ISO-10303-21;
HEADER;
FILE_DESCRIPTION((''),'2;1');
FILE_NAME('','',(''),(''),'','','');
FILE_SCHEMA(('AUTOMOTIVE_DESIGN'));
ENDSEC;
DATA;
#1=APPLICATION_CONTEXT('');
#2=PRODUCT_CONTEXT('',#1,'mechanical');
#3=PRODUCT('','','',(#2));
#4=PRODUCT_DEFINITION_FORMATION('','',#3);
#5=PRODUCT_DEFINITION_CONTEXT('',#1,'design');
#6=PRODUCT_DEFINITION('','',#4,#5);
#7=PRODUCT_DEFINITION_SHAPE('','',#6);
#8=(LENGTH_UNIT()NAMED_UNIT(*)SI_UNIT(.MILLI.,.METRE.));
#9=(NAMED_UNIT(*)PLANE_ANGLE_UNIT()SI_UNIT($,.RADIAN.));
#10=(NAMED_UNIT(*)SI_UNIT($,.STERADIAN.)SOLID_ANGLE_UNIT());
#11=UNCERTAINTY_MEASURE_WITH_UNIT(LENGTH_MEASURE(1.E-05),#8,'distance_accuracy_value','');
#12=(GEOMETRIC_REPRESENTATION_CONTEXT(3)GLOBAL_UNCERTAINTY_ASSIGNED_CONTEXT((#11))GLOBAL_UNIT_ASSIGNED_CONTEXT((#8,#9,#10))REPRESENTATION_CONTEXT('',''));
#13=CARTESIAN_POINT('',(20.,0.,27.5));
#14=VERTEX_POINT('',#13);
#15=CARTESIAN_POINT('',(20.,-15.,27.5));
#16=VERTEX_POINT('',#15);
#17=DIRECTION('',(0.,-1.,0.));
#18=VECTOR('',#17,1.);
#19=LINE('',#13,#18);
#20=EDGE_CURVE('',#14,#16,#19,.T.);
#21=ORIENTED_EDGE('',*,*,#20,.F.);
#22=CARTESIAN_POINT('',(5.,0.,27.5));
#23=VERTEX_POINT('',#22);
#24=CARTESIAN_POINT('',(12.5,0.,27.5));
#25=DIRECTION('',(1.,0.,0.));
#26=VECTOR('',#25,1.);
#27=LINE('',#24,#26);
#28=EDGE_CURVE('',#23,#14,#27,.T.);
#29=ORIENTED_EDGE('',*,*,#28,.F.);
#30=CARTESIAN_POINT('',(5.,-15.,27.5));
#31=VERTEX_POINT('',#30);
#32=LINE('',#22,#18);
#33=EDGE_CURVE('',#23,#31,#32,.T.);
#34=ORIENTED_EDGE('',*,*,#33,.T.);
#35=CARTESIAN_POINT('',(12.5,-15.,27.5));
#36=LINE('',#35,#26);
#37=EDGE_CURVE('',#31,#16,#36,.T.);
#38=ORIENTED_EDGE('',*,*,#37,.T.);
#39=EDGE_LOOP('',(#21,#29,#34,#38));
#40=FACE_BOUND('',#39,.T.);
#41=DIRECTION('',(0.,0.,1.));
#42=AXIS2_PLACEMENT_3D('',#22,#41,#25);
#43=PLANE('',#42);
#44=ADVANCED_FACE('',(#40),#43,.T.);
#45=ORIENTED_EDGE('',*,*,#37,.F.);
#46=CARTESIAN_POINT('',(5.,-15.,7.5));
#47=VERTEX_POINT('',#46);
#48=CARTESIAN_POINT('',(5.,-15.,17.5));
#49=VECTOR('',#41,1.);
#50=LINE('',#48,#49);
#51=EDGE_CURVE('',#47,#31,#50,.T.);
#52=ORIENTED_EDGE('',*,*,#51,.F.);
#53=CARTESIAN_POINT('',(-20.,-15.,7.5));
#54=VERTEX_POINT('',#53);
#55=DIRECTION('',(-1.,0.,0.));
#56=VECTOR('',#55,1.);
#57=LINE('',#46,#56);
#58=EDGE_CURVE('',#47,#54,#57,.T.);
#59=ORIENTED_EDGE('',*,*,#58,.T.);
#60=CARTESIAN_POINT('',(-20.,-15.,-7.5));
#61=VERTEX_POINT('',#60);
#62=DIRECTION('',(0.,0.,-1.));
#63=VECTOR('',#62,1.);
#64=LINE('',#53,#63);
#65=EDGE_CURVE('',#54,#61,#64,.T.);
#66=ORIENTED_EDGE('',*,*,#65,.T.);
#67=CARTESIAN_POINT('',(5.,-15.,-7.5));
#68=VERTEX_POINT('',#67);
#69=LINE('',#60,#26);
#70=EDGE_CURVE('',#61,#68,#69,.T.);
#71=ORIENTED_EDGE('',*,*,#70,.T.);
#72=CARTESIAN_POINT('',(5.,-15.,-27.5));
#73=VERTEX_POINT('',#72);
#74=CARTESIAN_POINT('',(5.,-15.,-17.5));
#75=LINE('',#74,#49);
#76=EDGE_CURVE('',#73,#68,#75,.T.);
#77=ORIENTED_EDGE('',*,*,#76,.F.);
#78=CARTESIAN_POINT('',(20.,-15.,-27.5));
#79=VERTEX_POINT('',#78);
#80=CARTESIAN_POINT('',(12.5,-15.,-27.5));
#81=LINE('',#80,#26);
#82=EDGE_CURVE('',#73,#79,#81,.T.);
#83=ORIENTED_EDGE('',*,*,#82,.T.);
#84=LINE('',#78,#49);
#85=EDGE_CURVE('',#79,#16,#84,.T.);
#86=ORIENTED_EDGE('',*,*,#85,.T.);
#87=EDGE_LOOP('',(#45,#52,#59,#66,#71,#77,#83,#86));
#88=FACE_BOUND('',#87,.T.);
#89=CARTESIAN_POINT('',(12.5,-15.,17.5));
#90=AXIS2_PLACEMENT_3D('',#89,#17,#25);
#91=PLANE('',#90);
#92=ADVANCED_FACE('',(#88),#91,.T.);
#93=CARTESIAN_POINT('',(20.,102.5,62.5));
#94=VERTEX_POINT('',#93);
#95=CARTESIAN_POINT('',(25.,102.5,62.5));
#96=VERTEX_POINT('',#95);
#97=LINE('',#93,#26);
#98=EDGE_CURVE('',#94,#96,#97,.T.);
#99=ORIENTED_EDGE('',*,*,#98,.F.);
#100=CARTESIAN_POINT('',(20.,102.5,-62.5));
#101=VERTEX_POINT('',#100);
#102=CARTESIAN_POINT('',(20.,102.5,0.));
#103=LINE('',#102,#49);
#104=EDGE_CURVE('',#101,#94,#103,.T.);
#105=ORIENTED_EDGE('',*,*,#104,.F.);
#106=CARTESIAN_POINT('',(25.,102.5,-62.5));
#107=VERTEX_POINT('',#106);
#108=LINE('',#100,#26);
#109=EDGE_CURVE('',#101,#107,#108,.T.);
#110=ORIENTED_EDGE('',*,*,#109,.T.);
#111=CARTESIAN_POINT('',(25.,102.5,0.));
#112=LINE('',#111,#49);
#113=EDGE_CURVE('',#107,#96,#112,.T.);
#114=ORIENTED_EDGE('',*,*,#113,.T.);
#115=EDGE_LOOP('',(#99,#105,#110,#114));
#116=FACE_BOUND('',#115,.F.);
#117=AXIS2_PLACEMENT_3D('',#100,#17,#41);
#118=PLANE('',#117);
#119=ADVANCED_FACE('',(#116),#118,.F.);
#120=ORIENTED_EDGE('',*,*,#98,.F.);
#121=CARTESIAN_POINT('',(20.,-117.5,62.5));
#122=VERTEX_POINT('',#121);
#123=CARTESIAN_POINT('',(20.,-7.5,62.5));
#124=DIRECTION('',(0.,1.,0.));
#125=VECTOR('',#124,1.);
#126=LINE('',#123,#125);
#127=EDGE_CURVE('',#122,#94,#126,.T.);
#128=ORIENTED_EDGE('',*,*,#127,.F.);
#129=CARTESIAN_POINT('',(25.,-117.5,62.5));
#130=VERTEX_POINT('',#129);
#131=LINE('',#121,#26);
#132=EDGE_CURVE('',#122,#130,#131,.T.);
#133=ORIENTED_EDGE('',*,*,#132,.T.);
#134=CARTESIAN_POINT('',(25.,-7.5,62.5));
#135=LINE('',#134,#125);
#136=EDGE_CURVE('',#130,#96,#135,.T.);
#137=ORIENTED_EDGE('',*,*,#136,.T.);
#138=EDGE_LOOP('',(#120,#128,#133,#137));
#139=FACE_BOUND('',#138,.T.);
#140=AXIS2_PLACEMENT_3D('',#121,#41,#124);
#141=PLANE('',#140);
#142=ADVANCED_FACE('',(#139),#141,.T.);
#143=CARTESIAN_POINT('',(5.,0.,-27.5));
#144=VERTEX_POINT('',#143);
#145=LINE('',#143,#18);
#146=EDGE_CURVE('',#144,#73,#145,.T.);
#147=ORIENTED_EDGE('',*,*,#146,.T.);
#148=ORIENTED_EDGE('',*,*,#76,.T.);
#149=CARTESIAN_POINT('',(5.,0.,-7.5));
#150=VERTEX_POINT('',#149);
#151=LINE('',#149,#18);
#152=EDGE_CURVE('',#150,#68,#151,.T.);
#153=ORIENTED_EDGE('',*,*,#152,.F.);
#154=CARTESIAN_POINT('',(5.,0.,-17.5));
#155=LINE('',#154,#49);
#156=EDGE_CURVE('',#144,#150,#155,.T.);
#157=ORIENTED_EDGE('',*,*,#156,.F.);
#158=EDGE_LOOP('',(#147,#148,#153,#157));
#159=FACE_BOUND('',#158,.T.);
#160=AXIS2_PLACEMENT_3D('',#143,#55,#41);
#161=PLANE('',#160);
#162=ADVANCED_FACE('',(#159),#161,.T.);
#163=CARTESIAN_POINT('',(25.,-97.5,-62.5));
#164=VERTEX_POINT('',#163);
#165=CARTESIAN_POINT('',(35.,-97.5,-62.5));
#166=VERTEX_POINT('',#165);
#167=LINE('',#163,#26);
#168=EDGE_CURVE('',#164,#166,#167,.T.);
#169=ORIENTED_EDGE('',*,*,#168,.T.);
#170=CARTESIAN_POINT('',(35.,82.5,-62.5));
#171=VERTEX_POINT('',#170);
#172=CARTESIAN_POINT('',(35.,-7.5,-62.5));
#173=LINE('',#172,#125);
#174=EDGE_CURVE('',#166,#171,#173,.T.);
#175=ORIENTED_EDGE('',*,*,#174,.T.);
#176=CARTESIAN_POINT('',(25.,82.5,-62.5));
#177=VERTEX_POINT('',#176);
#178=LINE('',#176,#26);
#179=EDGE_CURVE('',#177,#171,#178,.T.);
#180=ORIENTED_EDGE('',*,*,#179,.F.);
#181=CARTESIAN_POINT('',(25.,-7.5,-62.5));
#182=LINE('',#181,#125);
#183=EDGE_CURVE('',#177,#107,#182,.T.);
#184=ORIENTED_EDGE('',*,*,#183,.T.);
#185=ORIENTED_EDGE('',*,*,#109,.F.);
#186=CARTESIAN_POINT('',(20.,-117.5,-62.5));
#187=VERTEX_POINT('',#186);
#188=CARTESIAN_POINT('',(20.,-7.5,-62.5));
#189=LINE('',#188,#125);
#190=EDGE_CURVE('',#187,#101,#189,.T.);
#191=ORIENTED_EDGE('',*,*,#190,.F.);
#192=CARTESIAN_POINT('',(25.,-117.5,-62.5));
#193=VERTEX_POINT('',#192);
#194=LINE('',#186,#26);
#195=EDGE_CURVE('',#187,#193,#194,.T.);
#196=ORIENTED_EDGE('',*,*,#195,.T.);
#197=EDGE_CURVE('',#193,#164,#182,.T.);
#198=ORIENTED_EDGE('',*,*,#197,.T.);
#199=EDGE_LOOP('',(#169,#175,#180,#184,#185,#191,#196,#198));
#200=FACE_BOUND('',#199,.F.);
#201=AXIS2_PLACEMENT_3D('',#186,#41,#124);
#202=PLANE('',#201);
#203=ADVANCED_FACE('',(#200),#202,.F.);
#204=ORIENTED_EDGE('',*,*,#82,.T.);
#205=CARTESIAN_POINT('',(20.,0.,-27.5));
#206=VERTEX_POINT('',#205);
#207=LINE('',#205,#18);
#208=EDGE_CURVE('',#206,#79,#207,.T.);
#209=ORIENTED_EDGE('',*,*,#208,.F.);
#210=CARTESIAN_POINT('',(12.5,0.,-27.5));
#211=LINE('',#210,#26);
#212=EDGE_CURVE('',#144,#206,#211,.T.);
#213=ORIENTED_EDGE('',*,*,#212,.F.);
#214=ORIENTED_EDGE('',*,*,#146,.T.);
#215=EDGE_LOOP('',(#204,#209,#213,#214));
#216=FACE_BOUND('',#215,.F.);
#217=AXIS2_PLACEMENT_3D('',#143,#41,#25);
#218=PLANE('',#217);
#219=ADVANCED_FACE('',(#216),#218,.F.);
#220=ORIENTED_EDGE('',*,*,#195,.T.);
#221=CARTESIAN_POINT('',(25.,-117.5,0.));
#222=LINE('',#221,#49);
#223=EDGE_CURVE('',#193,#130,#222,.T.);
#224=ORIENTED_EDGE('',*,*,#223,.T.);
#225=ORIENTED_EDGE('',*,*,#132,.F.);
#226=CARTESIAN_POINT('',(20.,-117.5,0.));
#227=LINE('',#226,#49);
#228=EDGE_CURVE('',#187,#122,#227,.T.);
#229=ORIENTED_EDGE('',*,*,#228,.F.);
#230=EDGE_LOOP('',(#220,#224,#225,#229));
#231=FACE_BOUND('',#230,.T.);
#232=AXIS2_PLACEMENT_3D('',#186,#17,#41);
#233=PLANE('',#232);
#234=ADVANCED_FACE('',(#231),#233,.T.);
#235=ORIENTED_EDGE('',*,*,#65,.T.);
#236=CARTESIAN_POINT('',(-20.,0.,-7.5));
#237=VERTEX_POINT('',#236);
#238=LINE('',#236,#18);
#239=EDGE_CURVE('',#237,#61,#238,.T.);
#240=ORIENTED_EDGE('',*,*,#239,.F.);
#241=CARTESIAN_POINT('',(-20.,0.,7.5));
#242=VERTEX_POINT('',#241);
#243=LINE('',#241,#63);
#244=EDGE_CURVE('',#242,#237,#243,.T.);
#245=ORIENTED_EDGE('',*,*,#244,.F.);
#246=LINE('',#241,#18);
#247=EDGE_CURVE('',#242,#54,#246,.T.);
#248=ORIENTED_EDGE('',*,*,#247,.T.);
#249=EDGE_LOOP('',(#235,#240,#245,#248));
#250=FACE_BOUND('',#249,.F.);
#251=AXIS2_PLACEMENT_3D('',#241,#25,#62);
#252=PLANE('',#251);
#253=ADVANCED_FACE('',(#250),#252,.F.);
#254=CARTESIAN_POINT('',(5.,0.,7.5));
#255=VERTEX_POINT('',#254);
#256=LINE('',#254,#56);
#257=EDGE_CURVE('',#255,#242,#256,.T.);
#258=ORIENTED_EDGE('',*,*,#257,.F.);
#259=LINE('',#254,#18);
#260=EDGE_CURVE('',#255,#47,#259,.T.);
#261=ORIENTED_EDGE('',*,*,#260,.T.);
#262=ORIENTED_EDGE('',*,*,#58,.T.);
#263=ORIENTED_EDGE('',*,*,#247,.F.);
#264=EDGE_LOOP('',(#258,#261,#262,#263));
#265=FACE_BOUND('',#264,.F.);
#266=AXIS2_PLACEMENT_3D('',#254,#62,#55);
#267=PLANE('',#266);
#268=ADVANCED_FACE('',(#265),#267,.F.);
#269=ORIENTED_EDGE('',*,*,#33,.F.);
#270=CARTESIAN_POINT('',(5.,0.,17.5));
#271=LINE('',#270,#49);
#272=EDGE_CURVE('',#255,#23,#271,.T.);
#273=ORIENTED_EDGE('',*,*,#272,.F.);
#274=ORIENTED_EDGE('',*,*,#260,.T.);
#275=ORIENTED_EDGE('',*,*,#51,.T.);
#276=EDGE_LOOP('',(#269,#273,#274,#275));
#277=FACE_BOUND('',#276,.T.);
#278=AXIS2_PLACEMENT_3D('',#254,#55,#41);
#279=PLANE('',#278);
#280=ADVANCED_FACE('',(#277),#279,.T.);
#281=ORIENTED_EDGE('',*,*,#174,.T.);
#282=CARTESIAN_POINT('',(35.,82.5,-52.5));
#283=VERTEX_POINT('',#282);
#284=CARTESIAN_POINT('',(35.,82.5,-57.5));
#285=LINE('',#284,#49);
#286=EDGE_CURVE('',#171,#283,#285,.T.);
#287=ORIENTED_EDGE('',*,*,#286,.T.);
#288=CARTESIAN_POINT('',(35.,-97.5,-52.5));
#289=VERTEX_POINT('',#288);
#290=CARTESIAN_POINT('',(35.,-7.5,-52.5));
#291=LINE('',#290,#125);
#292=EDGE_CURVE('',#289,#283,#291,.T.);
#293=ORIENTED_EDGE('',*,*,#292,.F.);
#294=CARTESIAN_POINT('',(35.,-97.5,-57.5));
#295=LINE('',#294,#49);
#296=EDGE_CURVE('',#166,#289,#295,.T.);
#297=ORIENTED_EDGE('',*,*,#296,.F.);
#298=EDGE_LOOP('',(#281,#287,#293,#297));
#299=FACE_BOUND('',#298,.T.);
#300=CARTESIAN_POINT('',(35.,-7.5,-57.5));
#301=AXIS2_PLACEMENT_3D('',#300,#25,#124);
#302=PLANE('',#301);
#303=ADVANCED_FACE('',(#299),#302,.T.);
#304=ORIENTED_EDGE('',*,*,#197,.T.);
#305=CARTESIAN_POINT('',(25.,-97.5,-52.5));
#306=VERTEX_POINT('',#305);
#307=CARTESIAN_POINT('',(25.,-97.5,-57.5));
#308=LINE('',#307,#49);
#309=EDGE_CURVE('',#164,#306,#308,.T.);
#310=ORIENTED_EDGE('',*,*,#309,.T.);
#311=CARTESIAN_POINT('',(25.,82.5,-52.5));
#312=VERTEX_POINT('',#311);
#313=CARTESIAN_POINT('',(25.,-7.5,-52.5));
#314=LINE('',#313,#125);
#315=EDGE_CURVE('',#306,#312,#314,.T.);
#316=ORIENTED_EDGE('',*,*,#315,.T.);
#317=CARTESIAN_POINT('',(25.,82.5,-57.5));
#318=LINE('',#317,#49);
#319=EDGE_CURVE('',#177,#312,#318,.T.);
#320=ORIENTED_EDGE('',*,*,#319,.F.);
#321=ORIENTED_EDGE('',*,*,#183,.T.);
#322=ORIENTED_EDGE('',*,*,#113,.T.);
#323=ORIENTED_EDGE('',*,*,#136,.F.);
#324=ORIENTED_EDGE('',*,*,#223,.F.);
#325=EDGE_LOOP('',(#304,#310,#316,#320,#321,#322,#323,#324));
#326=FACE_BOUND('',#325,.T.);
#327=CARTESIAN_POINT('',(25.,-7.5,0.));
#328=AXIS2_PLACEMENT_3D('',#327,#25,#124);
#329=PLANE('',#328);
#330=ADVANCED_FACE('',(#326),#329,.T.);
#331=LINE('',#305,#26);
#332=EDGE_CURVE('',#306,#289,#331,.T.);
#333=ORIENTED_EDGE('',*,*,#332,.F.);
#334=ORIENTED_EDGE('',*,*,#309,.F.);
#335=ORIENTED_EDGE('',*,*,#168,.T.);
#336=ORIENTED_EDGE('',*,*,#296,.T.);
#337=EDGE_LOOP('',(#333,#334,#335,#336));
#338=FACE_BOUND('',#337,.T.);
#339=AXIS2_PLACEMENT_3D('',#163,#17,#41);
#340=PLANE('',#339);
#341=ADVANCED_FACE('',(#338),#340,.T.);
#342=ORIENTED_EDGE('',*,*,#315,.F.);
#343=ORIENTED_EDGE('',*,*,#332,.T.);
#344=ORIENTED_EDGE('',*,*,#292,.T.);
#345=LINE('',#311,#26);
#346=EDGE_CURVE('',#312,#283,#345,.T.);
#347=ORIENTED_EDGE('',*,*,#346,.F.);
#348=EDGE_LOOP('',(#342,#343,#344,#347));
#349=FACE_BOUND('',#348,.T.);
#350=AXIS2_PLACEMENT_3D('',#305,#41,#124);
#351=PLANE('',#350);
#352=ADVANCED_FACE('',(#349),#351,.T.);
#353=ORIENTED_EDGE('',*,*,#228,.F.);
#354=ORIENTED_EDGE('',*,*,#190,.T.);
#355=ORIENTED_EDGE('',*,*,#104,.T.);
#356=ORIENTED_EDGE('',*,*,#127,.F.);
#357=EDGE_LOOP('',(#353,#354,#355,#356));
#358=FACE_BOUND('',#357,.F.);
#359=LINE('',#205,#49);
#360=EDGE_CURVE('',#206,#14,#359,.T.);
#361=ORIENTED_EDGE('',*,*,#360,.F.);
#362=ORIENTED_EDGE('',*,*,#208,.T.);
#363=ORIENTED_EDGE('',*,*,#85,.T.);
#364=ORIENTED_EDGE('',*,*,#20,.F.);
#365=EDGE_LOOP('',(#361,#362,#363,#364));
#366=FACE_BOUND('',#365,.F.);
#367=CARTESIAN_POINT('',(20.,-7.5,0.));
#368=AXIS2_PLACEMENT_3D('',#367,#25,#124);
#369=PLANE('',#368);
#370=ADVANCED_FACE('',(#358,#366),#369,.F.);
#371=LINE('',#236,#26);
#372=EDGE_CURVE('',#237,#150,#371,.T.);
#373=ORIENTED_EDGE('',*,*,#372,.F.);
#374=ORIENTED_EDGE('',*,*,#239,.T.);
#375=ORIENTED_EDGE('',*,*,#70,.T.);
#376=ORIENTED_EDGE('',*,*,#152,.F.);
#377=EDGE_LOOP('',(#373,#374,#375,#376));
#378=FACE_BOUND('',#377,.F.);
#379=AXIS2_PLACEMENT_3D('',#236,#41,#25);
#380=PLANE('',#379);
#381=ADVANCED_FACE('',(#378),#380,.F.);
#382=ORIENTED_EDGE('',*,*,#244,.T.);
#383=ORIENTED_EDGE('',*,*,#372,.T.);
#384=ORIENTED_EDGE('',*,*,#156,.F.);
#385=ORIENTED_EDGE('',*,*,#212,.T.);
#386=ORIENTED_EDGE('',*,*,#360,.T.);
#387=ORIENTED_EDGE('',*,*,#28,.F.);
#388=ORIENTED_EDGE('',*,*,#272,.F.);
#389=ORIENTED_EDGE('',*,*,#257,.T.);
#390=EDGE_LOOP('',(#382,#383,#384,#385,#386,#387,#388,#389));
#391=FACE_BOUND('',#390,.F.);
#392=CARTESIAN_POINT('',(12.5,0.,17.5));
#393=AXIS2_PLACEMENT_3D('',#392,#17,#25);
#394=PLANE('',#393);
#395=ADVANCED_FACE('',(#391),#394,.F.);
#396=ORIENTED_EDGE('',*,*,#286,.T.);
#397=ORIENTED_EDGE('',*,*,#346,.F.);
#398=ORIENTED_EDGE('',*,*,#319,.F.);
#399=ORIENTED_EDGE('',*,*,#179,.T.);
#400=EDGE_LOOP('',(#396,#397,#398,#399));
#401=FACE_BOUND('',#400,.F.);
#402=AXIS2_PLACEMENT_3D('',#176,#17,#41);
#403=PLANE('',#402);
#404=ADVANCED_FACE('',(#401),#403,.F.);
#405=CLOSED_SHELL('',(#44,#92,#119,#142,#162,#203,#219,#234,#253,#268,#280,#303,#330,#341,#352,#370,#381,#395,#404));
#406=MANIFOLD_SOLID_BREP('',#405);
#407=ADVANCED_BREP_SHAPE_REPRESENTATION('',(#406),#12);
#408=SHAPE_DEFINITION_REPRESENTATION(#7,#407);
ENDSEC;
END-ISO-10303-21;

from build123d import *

# Parameters (mm, degrees)
F0_W     = 15
F0_H     = 20
F1_DEPTH = 15
F2_W     = 220
F2_H     = 125
F2_W_2   = 15
F2_H_2   = 55
F3_DEPTH = 5
F4_W     = 180
F4_H     = 10
F5_DEPTH = 10


with BuildPart() as f1:
    # F0 (on Front) → F1 (new body)
    with BuildSketch(Plane.XZ):
        with Locations((12.5, 17.5)):
            Rectangle(F0_W, F0_H)
        with Locations((12.5, -17.5)):
            Rectangle(F0_W, F0_H)
        Polygon((5, 7.5), (-20, 7.5), (-20, -7.5), (5, -7.5), (20, -7.5), (20, 7.5), align=None)
    extrude(amount=F1_DEPTH)

    # F2 (on face) → F3 (join)
    with BuildSketch(Plane.YZ.offset(20)):
        with Locations((-7.5, 0)):
            Rectangle(F2_W, F2_H)
        with Locations((-7.5, 0)):
            Rectangle(F2_W_2, F2_H_2, mode=Mode.SUBTRACT)
        with Locations((-7.5, 0)):
            Rectangle(F2_W_2, F2_H_2)
    extrude(amount=F3_DEPTH)

    # F4 (on face) → F5 (join)
    with BuildSketch(Plane.YZ.offset(25)):
        with Locations((-7.5, -57.5)):
            Rectangle(F4_W, F4_H)
    extrude(amount=F5_DEPTH)


solid = f1.part
